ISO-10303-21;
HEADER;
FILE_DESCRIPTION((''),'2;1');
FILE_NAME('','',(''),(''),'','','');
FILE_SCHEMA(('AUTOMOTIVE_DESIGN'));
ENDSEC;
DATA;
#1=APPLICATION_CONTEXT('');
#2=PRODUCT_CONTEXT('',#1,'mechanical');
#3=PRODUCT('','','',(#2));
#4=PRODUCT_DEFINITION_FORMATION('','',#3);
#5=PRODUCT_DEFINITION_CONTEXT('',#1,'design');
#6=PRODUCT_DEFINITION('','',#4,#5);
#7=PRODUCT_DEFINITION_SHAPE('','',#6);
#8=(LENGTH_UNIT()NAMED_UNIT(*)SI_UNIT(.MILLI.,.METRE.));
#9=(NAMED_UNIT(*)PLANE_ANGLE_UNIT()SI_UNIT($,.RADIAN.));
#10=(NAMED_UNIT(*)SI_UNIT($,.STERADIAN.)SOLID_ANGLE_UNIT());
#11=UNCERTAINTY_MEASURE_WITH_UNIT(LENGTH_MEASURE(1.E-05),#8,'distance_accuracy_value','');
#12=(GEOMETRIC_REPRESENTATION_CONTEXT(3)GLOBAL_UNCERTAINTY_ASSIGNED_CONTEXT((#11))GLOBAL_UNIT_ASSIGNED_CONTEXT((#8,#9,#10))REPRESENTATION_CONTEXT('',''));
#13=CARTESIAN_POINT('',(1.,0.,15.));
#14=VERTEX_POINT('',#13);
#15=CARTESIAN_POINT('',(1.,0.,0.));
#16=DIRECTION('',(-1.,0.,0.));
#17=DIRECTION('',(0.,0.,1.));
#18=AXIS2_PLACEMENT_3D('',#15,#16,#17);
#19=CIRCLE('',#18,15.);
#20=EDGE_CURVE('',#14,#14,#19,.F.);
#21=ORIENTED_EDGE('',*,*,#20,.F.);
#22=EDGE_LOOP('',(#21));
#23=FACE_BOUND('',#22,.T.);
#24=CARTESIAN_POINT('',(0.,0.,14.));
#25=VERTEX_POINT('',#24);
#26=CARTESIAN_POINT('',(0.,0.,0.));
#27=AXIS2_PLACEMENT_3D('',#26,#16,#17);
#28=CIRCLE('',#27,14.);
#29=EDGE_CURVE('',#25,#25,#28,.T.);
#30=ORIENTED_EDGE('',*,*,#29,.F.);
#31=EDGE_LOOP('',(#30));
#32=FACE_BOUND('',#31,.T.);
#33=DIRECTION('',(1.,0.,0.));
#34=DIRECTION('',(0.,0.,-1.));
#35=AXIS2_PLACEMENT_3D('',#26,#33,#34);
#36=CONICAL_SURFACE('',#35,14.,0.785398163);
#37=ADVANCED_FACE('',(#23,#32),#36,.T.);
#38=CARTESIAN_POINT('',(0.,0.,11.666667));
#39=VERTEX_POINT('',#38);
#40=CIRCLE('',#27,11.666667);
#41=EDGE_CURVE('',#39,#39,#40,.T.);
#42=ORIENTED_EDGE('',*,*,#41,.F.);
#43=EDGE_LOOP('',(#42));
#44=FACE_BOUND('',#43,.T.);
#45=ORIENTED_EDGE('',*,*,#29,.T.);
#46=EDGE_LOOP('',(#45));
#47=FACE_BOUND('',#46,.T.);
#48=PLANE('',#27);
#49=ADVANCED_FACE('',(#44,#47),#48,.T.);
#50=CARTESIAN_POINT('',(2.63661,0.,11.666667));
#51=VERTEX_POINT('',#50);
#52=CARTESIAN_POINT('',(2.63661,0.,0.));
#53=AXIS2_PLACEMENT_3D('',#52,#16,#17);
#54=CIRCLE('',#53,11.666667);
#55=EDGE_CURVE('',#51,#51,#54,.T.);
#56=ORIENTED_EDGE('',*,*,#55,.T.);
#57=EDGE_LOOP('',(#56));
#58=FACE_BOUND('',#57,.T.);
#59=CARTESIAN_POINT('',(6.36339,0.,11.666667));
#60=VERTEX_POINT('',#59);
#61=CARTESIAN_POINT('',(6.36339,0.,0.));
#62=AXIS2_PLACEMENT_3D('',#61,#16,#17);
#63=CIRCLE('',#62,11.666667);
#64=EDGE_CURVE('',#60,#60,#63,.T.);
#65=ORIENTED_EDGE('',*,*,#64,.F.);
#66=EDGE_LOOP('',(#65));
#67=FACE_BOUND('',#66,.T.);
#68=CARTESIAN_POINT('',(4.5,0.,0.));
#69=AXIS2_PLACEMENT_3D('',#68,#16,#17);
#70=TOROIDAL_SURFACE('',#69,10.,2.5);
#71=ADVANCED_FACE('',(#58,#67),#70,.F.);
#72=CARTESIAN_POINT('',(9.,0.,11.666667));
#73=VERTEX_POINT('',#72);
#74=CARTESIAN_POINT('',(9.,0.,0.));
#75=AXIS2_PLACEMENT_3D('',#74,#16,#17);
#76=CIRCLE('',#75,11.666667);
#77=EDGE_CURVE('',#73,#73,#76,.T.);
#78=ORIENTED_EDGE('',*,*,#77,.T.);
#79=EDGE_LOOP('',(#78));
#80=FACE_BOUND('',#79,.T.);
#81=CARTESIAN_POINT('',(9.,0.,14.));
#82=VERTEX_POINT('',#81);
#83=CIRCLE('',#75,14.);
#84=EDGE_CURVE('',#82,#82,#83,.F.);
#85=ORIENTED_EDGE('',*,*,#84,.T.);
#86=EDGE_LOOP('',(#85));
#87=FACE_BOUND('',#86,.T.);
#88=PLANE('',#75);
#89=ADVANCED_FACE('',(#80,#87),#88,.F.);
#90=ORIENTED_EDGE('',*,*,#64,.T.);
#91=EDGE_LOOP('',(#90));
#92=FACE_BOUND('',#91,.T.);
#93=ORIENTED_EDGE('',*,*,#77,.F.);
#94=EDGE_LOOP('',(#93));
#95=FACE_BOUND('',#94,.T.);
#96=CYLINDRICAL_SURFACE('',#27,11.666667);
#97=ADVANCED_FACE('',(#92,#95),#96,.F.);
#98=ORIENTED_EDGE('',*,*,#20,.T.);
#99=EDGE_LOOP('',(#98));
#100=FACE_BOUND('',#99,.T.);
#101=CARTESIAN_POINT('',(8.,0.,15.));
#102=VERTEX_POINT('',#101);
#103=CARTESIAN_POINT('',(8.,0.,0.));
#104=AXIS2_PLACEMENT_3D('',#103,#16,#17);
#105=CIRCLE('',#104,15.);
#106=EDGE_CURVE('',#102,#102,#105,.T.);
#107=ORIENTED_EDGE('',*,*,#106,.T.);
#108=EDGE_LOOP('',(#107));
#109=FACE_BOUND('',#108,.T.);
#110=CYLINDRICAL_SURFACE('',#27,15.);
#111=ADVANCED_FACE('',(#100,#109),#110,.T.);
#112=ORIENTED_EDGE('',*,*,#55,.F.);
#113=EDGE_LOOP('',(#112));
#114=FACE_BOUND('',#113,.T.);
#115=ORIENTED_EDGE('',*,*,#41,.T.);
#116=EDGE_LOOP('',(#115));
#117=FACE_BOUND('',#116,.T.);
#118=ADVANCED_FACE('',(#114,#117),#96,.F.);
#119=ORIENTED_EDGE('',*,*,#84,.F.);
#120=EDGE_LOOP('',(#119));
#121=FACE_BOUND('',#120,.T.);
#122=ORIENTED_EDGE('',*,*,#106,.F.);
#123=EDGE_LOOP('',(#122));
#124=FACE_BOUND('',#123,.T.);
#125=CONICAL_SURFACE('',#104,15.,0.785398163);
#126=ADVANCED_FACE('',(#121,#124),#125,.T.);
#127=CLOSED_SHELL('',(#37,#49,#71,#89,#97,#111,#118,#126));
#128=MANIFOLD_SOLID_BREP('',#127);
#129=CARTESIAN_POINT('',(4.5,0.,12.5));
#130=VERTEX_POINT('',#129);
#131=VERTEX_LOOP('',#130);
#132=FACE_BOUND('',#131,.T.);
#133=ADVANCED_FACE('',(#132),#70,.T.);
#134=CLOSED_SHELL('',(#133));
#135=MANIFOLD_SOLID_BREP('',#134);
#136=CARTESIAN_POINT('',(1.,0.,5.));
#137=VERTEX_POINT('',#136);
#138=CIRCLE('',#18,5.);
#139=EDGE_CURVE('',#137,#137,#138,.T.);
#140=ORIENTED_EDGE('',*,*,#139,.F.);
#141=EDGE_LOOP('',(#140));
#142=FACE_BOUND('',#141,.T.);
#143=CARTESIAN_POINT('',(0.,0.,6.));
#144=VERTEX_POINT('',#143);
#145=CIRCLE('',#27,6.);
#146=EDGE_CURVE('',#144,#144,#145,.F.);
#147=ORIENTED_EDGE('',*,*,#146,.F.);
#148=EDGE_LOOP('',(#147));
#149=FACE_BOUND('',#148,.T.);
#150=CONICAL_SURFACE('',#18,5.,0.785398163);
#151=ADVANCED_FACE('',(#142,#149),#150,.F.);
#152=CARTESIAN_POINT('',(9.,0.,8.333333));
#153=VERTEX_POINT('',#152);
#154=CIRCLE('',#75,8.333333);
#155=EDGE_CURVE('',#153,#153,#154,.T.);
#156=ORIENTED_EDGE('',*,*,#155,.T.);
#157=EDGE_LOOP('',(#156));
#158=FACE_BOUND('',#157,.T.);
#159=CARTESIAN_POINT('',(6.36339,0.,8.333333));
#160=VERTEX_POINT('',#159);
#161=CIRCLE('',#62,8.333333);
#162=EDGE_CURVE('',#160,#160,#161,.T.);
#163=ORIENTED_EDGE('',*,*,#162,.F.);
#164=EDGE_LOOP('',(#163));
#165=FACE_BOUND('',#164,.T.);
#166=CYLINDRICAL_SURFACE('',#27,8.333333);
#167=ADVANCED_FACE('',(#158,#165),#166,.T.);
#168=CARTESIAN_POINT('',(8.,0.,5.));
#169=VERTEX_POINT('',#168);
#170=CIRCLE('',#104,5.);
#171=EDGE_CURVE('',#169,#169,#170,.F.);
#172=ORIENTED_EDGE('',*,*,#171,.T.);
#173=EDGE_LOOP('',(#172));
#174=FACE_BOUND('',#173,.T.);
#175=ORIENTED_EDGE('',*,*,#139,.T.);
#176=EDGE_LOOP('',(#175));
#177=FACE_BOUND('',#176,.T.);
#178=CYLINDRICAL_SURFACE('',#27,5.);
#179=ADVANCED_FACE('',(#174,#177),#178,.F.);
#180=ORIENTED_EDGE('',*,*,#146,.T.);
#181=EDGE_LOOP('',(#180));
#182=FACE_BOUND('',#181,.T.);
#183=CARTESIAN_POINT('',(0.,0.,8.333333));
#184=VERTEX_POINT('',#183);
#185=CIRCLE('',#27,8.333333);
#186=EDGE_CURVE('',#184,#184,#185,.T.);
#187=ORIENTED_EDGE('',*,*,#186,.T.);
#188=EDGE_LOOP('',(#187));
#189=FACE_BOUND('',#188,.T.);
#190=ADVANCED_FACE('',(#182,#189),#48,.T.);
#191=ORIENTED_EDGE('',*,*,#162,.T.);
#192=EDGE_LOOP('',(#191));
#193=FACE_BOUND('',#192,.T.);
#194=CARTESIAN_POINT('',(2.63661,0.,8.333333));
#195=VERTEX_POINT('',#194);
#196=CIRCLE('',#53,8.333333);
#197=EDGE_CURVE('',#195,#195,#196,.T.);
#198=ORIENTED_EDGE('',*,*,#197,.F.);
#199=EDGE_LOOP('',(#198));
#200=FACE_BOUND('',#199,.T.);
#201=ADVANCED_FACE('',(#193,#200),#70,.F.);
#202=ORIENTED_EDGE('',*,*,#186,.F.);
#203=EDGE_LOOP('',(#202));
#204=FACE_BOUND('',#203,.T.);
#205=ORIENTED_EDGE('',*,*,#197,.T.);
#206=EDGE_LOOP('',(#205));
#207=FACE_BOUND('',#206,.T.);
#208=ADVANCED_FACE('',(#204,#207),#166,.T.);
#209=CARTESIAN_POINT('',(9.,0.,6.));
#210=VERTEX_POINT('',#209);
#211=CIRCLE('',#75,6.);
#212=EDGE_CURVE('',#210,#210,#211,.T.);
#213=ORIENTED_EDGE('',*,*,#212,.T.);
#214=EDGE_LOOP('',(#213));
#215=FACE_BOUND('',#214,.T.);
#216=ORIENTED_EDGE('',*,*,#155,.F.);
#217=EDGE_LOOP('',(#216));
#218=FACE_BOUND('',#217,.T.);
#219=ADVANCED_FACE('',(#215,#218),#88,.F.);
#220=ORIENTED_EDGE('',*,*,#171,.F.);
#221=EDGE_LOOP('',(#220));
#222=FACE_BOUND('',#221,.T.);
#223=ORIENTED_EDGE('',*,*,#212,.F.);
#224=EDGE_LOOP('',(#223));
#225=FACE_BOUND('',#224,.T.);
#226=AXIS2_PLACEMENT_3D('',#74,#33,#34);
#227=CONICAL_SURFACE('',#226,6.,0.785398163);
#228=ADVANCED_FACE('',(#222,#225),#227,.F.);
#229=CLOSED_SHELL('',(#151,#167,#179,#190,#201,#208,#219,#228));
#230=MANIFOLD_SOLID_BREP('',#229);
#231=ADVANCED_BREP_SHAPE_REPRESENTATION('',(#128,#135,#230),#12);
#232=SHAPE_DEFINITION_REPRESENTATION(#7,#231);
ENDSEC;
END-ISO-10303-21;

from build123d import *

# Parameters (mm, degrees)
SKETCH_1_5_R   = 2.5
CHAMFER_1_SIZE = 1
CHAMFER_3_SIZE = 1


with BuildPart() as part:
    # Эскиз1 → Повернуть1 (revolve)
    with BuildSketch(Plane.XY, mode=Mode.PRIVATE) as revolve_1_sk:
        with BuildLine():
            Line((0, 8.333333333), (0, 5))
            Line((0, 5), (9, 5))
            Line((9, 5), (9, 8.333333333))
            Line((9, 8.333333333), (6.363389981, 8.333333333))
            ThreePointArc((6.363389981, 8.333333333), (4.5, 7.5), (2.636610019, 8.333333333))
            Line((2.636610019, 8.333333333), (0, 8.333333333))
        make_face()
    revolve(revolve_1_sk.sketch.rotate(Axis((0, 0, 0), (1, 0, 0)), 90), axis=Axis((0, 0, 0), (1, 0, 0)))

    # Фаска1
    chamfer_1_edges = [part.edges().sort_by_distance(p)[0] for p in [
        (9, 0, -5),
        (0, 0, -5),
    ]]
    chamfer(chamfer_1_edges, length=CHAMFER_1_SIZE)


with BuildPart() as body_2:
    # Эскиз1<4> → Повернуть2 (revolve)
    with BuildSketch(Plane.XY, mode=Mode.PRIVATE) as revolve_2_sk:
        with BuildLine():
            Line((0, 15), (0, 11.666666667))
            Line((0, 11.666666667), (2.636610019, 11.666666667))
            ThreePointArc((2.636610019, 11.666666667), (4.5, 12.5), (6.363389981, 11.666666667))
            Line((6.363389981, 11.666666667), (9, 11.666666667))
            Line((9, 11.666666667), (9, 15))
            Line((9, 15), (0, 15))
        make_face()
    revolve(revolve_2_sk.sketch.rotate(Axis((0, 0, 0), (1, 0, 0)), 90), axis=Axis((0, 0, 0), (1, 0, 0)))

    # Фаска3
    chamfer_3_edges = [body_2.edges().sort_by_distance(p)[0] for p in [
        (0, 0, -15),
        (9, 0, -15),
    ]]
    chamfer(chamfer_3_edges, length=CHAMFER_3_SIZE)


with BuildPart() as body_3:
    # Эскиз1<5> → Повернуть3 (revolve)
    with BuildSketch(Plane.XY, mode=Mode.PRIVATE) as revolve_3_sk:
        with Locations((4.5, 10)):
            Circle(SKETCH_1_5_R)
    revolve(revolve_3_sk.sketch.rotate(Axis((0, 0, 0), (1, 0, 0)), 270), axis=Axis((0, 0, 0), (1, 0, 0)))


solid = Compound([part.part, body_2.part, body_3.part])
